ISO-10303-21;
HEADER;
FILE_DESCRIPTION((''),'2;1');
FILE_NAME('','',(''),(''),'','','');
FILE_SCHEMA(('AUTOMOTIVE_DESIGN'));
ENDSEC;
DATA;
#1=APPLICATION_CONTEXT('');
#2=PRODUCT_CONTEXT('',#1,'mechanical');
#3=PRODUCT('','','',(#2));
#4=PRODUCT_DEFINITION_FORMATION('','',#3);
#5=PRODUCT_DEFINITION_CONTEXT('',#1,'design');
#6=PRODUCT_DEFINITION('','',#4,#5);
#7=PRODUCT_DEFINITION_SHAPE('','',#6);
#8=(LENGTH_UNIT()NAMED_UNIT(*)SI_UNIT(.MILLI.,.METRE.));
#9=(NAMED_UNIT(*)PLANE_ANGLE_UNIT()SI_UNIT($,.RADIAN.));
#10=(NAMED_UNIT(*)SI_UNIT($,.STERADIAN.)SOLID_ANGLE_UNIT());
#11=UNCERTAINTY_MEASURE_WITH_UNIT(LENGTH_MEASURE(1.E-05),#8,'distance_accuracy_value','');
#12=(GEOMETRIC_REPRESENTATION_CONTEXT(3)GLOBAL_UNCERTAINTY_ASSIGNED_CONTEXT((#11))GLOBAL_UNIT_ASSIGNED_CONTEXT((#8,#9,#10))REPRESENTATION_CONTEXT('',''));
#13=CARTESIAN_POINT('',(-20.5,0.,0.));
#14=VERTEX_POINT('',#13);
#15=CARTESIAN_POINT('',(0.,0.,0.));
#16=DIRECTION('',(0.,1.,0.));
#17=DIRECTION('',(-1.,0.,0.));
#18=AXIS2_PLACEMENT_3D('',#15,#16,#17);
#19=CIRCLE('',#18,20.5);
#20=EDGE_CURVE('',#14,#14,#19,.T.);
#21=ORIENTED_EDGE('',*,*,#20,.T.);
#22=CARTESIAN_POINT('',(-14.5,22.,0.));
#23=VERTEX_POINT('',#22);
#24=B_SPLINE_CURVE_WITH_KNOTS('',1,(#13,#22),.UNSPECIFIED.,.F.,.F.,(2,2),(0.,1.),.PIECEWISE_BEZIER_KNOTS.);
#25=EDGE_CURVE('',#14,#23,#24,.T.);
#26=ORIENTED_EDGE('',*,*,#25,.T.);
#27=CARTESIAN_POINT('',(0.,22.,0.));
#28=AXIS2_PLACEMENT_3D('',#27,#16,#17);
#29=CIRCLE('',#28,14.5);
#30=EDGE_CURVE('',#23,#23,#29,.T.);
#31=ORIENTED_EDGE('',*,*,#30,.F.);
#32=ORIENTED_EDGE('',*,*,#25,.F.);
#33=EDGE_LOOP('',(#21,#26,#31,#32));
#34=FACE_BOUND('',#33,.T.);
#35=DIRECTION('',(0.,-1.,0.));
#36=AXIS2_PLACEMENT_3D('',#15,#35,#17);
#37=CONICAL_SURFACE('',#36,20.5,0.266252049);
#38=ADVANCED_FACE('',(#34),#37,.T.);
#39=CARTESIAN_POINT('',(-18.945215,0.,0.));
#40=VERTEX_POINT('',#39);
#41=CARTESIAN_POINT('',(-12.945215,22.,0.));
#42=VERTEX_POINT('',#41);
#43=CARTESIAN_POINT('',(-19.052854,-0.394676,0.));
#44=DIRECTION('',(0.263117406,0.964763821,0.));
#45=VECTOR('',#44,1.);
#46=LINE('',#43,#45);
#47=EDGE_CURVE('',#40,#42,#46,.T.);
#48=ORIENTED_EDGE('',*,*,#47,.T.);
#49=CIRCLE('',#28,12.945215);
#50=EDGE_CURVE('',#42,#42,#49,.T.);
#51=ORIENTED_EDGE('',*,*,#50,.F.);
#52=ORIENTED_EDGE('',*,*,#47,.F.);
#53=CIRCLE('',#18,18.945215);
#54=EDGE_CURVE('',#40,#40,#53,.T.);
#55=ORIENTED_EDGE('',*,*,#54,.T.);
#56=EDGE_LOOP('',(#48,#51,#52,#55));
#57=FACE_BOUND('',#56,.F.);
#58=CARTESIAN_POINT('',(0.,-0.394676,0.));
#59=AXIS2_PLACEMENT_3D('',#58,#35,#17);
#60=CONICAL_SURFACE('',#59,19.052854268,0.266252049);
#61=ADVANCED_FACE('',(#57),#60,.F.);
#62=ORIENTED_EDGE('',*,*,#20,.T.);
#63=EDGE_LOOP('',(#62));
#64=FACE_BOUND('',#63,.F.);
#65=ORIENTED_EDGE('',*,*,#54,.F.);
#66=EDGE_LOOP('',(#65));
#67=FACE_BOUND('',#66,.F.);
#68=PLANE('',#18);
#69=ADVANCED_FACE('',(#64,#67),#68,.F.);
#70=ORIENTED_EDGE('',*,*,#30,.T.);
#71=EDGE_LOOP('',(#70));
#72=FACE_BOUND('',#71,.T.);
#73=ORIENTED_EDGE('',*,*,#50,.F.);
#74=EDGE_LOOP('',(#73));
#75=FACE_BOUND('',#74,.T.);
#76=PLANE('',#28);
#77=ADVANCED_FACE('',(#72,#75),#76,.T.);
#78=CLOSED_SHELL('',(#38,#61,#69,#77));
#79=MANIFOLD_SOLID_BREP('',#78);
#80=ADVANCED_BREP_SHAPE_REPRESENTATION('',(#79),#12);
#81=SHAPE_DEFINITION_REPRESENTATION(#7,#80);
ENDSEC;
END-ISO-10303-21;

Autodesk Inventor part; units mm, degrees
ref_plane "YZ Plane" through (0, 0, 0) normal (1, 0, 0) x (0, 1, 0)
ref_plane "XY Plane" through (0, 0, 0) normal (0, 0, 1) x (1, 0, 0)
sketch "Szkic6" plane through (0, 0, 0) normal (0, 1, 0) x (-1, 0, 0)
  circle A0 centre (0, 0) radius 20.5
  dimension "d33" = 41
ref_plane "Płaszczyzna konstrukcyjna1" through (0, 22, 0) normal (0, 1, 0) x (-1, 0, 0)
sketch "Szkic7" plane through (0, 22, 0) normal (0, 1, 0) x (-1, 0, 0)
  circle A0 centre (0, 0) radius 14.5
  dimension "d35" = 29
loft "Wyciągnięcie złożone1" add profiles "Szkic6", "Szkic7"
shell "Skorupa1" thickness 1.5 removed faces 2 at (1.052, 22, -3.5603) at (-3.5154, 0, 4.1371)
equation "\"d33\" = OD1"
equation "\"d35\" = OD2"
equation "\"d52\" = THK"
equation "\"SzerokośćGięciaPodcięcia\" = Grubość"
equation "\"RozmiarPodcięciaNarożnika\" = 4 * Grubość"
equation "\"PromieńPrzejścia\" = PromieńGięcia"
equation "\"Rozmiar_promienia_Jacobiego\" = PromieńGięcia"
equation "\"Wielk_odstępu\" = Grubość"
equation "\"d2\" = PromieńGięcia"
equation "\"d23\" = PromieńGięcia"
equation "\"OD1\" = 41"
equation "\"OD2\" = 29"
equation "\"L\" = 22"
equation "\"THK\" = 1.5"
equation "\"d34\" = L"
equation "\"Grubość\" = 1.5"
equation "\"PromieńGięcia\" = 3"
properties part number "Redukcja symetryczna Ø41x29x1,5 L=22" material "304"
